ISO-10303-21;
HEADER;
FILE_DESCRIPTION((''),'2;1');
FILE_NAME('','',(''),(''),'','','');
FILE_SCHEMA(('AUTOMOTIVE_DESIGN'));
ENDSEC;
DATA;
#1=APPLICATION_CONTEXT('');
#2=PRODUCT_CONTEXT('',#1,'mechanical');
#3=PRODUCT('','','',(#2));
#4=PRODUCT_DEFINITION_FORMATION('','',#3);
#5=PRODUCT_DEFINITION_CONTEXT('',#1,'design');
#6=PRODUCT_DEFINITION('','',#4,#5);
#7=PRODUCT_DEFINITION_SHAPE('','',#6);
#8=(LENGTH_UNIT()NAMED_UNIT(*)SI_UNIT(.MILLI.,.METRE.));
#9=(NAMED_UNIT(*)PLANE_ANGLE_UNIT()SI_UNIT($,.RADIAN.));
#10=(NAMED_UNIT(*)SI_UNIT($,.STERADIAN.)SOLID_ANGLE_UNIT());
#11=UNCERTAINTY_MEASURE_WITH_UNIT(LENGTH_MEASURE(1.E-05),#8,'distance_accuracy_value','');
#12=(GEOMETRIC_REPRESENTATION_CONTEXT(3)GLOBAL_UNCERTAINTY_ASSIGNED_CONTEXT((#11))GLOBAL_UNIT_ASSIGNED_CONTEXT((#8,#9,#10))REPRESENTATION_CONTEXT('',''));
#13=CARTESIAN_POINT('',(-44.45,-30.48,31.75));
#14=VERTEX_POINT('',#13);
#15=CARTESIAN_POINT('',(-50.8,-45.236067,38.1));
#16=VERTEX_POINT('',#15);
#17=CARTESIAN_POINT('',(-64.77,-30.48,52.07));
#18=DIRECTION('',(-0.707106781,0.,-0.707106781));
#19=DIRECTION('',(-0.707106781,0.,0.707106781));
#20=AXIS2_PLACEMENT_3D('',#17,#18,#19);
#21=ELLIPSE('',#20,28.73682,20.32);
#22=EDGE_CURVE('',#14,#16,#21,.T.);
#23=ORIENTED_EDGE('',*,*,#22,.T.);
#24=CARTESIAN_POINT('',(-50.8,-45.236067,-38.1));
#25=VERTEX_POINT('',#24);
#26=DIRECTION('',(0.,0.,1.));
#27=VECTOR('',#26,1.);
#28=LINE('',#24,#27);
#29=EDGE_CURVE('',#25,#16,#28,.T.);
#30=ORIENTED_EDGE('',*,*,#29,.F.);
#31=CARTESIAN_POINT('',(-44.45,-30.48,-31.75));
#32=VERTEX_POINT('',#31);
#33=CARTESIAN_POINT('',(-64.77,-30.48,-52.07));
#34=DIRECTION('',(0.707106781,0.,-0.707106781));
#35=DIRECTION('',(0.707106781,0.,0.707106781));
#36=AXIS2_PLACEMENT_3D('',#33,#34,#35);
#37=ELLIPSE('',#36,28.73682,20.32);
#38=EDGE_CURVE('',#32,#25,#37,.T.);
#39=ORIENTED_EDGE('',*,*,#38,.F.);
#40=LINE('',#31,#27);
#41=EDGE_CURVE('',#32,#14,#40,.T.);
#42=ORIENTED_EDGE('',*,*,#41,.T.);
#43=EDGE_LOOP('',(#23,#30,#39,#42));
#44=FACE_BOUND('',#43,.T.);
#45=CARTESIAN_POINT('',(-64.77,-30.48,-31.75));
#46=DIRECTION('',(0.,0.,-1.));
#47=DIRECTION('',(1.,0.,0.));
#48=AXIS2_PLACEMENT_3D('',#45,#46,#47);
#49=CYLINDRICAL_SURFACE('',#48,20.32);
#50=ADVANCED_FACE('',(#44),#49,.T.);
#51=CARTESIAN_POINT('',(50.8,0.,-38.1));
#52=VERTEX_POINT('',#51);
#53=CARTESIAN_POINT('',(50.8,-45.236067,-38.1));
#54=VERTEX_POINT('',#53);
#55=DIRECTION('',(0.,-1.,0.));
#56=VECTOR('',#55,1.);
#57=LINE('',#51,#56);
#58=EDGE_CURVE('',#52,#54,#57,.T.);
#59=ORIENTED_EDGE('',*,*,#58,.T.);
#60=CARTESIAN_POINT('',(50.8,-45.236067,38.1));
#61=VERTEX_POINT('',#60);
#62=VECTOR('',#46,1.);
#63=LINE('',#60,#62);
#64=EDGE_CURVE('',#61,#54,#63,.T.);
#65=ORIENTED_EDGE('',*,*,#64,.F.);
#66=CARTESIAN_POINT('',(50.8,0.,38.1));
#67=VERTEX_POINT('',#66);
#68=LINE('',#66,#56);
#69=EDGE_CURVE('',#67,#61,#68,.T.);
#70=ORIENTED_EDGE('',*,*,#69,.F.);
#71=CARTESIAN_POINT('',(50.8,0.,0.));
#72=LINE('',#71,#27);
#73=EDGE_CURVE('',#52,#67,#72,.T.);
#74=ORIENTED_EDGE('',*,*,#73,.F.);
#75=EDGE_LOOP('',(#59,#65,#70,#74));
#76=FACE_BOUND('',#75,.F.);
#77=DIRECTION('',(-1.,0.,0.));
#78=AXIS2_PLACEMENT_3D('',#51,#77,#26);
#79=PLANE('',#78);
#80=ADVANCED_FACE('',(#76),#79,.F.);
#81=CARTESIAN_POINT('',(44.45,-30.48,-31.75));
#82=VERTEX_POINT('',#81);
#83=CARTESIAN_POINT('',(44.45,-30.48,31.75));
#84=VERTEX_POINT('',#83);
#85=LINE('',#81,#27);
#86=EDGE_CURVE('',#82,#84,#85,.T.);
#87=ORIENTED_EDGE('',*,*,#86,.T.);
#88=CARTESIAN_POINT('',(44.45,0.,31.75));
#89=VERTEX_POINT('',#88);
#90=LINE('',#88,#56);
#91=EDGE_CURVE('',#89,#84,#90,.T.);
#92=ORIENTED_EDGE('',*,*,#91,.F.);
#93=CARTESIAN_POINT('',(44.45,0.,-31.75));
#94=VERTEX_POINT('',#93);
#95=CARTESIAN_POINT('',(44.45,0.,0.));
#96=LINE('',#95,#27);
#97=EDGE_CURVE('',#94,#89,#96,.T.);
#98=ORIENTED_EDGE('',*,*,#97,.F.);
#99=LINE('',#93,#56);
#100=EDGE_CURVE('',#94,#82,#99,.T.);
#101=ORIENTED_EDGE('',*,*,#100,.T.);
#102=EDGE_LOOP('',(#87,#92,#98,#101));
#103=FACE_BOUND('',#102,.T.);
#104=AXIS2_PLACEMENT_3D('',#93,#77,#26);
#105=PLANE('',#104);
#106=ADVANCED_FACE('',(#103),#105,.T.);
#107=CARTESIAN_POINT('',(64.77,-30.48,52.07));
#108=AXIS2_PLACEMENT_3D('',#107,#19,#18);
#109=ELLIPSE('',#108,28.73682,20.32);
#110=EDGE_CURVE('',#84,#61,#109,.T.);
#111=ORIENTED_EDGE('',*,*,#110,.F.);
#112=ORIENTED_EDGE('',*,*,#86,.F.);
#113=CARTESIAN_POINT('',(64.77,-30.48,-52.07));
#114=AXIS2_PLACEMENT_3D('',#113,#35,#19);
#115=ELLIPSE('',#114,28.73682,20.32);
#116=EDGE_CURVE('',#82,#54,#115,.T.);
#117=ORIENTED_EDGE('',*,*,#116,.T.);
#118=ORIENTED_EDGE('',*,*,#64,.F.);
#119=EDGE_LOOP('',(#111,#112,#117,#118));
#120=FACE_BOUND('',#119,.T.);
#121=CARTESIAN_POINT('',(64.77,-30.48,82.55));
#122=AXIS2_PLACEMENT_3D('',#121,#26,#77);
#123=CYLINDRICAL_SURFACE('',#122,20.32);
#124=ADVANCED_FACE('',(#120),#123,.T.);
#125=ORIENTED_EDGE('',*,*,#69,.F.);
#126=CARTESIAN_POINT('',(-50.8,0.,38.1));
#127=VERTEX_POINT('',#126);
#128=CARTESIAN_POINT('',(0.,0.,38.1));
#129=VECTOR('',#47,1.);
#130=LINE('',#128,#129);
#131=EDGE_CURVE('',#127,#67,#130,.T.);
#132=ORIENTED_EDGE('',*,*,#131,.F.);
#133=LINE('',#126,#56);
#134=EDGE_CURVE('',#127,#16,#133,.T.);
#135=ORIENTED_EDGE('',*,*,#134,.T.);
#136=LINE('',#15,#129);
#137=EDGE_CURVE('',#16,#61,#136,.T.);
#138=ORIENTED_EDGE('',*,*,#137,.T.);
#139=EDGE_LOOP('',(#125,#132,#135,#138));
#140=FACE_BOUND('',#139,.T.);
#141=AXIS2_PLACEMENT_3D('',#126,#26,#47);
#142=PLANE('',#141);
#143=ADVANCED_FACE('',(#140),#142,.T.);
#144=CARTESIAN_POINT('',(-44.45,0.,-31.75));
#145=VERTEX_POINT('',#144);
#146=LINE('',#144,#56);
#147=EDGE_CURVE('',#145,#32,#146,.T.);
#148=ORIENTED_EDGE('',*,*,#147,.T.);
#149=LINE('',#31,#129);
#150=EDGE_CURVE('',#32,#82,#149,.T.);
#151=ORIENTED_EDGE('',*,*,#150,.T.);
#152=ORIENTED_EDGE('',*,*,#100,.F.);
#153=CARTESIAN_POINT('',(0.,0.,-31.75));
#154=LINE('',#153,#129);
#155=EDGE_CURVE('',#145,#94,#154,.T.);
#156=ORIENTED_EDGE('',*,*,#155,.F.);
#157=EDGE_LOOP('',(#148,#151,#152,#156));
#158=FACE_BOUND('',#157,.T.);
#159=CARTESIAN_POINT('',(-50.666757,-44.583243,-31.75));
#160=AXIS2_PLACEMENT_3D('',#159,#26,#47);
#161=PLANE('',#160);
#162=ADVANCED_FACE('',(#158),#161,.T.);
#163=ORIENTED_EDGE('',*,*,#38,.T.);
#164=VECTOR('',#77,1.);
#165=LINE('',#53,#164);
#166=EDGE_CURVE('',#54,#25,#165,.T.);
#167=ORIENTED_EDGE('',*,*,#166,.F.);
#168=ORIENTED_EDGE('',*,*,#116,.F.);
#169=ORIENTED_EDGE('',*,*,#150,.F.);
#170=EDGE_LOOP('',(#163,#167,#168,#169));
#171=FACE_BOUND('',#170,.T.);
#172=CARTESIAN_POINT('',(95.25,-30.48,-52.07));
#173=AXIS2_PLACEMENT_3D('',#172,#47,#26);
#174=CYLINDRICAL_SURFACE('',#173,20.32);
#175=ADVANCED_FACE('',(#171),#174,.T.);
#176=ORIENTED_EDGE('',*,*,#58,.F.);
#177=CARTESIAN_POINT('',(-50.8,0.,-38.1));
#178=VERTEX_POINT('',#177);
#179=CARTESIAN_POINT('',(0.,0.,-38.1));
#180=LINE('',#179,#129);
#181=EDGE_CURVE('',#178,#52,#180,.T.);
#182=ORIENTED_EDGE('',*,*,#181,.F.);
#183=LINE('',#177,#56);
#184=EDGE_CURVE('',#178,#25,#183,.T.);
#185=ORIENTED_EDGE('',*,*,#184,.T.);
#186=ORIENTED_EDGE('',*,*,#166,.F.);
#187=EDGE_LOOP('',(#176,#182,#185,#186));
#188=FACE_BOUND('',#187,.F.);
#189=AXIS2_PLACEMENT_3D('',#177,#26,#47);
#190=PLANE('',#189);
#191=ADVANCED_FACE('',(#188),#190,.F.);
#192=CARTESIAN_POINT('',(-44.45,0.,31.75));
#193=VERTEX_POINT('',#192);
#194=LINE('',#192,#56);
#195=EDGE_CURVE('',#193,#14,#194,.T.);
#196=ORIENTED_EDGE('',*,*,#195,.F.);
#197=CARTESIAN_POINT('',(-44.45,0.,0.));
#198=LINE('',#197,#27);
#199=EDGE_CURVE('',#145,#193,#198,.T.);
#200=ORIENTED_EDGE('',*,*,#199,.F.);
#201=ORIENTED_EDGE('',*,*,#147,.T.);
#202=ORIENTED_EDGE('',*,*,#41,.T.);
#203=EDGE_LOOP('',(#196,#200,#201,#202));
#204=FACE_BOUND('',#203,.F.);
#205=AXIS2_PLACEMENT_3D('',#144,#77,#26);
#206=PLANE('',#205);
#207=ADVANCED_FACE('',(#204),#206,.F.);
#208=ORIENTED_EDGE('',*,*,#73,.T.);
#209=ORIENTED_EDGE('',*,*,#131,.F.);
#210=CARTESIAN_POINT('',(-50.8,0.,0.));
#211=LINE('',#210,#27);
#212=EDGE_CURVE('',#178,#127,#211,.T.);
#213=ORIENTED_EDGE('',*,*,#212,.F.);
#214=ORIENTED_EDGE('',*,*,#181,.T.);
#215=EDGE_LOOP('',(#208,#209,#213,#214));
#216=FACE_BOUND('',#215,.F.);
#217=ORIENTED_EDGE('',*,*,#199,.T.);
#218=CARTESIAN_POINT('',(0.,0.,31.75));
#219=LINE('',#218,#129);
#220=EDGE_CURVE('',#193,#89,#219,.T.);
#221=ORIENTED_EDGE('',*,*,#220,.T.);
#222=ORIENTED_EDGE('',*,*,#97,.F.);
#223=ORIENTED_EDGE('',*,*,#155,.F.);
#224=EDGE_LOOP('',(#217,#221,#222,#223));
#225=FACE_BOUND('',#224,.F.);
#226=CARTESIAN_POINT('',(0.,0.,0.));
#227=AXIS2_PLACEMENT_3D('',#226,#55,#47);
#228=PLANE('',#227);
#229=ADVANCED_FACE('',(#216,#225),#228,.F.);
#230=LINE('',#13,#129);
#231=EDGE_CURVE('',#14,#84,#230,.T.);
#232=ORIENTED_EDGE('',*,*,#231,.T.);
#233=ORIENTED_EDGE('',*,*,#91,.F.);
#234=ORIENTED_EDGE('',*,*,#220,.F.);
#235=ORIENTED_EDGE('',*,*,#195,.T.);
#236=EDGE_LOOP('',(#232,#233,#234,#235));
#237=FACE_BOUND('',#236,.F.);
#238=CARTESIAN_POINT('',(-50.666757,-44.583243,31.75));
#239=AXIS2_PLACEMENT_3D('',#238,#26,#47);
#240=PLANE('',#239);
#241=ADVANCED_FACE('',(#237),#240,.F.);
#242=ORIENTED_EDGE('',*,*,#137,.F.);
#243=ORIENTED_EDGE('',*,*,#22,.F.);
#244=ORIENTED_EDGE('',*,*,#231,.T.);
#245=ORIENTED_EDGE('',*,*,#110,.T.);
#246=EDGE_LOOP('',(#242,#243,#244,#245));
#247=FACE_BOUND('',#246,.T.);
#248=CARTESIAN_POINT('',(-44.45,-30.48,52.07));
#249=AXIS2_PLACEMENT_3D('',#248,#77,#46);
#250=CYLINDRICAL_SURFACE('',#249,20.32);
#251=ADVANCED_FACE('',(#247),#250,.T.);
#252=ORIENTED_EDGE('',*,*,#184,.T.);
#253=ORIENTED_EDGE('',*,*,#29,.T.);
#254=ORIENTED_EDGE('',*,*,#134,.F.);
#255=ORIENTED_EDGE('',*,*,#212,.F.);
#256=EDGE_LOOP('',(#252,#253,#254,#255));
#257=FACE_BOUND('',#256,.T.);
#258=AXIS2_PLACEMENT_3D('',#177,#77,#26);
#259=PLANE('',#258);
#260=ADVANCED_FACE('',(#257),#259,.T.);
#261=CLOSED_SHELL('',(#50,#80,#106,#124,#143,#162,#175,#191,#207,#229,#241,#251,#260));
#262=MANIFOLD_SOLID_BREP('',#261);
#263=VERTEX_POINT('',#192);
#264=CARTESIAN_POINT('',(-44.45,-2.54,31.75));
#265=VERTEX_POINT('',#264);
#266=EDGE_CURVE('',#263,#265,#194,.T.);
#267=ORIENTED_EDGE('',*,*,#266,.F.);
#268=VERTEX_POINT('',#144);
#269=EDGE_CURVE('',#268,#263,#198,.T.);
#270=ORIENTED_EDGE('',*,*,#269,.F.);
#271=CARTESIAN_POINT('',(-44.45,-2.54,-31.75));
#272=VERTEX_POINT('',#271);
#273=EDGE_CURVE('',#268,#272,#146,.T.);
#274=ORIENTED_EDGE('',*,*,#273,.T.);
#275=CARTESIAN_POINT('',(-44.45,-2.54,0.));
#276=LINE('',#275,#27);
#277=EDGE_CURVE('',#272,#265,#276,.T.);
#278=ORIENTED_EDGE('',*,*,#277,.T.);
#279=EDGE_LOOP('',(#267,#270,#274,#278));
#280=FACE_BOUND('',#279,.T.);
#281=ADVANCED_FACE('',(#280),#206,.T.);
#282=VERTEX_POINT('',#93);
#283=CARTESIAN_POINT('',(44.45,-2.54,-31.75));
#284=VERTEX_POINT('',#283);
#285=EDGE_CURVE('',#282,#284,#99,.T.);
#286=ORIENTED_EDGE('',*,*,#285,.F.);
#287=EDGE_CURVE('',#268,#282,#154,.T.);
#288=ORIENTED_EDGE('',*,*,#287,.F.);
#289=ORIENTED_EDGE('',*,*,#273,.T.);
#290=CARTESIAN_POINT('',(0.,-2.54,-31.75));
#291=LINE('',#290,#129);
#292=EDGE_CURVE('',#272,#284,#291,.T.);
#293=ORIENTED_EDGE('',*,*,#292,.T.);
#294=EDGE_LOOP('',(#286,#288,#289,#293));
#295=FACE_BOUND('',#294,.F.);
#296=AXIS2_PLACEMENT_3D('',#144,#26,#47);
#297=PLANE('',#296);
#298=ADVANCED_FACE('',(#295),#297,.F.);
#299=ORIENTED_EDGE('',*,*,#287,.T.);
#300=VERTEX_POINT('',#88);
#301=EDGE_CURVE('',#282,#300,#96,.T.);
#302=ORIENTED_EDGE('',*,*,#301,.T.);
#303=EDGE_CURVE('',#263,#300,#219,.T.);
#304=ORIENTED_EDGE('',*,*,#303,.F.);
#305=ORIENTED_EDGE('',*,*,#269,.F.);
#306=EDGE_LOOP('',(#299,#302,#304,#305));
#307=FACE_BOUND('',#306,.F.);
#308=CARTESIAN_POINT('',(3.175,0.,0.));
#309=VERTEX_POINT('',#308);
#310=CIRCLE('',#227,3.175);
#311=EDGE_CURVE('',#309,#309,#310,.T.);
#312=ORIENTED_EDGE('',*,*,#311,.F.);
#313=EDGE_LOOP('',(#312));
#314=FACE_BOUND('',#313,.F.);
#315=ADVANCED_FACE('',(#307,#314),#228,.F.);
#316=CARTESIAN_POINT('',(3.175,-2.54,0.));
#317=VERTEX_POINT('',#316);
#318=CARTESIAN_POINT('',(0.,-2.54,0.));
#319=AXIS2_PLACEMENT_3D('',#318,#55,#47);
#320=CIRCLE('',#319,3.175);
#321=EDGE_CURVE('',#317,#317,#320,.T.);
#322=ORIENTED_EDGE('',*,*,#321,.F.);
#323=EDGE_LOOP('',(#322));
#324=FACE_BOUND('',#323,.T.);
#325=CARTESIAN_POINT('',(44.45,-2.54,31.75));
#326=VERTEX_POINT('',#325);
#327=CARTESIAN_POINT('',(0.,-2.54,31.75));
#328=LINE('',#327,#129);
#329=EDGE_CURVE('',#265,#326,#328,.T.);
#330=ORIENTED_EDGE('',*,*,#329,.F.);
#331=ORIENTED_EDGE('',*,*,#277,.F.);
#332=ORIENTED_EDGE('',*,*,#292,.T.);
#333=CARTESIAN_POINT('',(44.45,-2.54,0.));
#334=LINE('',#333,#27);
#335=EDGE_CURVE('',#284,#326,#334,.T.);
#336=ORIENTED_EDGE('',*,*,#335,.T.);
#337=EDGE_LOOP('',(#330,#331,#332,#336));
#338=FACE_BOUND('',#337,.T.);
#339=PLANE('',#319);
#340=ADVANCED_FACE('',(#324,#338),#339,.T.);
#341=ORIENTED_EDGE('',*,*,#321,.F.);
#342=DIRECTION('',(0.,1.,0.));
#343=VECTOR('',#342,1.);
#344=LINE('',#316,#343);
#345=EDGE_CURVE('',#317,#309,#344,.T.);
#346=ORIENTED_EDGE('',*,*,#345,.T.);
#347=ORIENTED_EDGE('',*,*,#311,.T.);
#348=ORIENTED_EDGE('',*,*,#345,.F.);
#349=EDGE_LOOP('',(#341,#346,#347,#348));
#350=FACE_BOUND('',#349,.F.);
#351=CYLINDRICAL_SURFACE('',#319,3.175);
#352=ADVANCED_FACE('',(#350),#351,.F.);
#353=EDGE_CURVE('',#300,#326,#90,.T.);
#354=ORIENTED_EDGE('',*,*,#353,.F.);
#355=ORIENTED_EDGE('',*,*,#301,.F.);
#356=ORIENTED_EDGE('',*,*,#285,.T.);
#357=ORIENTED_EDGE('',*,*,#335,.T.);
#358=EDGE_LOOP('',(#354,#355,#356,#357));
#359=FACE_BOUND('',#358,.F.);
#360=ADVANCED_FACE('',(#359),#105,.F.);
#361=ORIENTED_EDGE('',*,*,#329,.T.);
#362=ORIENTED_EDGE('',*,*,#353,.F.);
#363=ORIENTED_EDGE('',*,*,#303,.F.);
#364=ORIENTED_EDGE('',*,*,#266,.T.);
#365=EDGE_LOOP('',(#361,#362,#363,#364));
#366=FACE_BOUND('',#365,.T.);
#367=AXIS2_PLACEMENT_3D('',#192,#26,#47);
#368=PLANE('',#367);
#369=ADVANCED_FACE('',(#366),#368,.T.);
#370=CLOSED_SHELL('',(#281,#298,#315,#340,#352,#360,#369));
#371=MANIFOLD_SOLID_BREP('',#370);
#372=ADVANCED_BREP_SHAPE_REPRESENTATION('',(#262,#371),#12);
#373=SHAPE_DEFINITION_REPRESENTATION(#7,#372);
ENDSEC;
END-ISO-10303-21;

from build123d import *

# Parameters (mm, degrees)
F0_W         = 101.6
F0_H         = 76.2
F0_W_2       = 88.9
F0_H_2       = 63.5
F1_DEPTH     = 50.8
F2_DEPTH     = 2.54
F3_T1_DEPTH  = 63.5
F3_T3_DEPTH  = 88.9
F3_T9_DEPTH  = 139.7
F3_T15_DEPTH = 114.3
F3_T24_DEPTH = 139.7
F3_T30_DEPTH = 114.3
F3_T39_DEPTH = 139.7
F3_T45_DEPTH = 114.3
F3_T54_DEPTH = 114.3
F3_T60_DEPTH = 139.7
F4_R         = 3.175
F5_DEPTH     = 2.541


# Not quite as in the source:
# - a fillet or chamfer that OpenCascade refuses, or shapes differently, is made with other operations: its cross-section is extruded or revolved along the edge and cut away or added


with BuildPart() as f1:
    # F0 (on Front) → F1 (new body)
    with BuildSketch(Plane.XZ):
        Rectangle(F0_W, F0_H)
        Rectangle(F0_W_2, F0_H_2, mode=Mode.SUBTRACT)
    extrude(amount=F1_DEPTH)

    # F3: fillet of radius 20.32 on 4 edges, made by hand

    # F3_s2 → F3_t1 (cut)
    with BuildSketch(Plane.XY.offset(-31.75)):
        with BuildLine():
            ThreePointArc((-44.45, -30.48), (-50.4015902063, -44.8484097937), (-64.77, -50.8))
            Line((-64.77, -50.8), (-44.45, -50.8))
            Line((-44.45, -50.8), (-44.45, -30.48))
        make_face()
        with BuildLine():
            ThreePointArc((44.45, -30.48), (50.4015902063, -44.8484097937), (64.77, -50.8))
            Line((64.77, -50.8), (44.45, -50.8))
            Line((44.45, -50.8), (44.45, -30.48))
        make_face()
    extrude(amount=F3_T1_DEPTH, mode=Mode.SUBTRACT)

    # F3_s4 → F3_t3 (cut)
    with BuildSketch(Plane.YZ.offset(-44.45)):
        with BuildLine():
            ThreePointArc((-30.48, 31.75), (-44.8484097937, 37.7015902063), (-50.8, 52.07))
            Line((-50.8, 52.07), (-50.8, 31.75))
            Line((-50.8, 31.75), (-30.48, 31.75))
        make_face()
        with BuildLine():
            ThreePointArc((-30.48, -31.75), (-44.8484097937, -37.7015902063), (-50.8, -52.07))
            Line((-50.8, -52.07), (-50.8, -31.75))
            Line((-50.8, -31.75), (-30.48, -31.75))
        make_face()
    extrude(amount=F3_T3_DEPTH, mode=Mode.SUBTRACT)


with BuildPart() as f2:
    # F0 (on Front) → F2 (new body)
    with BuildSketch(Plane.XZ):
        Rectangle(F0_W_2, F0_H_2)
    extrude(amount=F2_DEPTH)

    # F4 (on face) → F5 (cut, through all)
    with BuildSketch(Plane.XZ.offset(2.54)):
        Circle(F4_R)
    extrude(amount=-F5_DEPTH, mode=Mode.SUBTRACT)


with BuildPart() as f3_tool7:
    # F3_s8 → F3_t9 (new body)
    with BuildSketch(Plane.YZ.offset(44.45)):
        with BuildLine():
            ThreePointArc((-30.48, -31.75), (-44.8484097937, -37.7015902063), (-50.8, -52.07))
            Line((-50.8, -52.07), (-50.8, -31.75))
            Line((-50.8, -31.75), (-30.48, -31.75))
        make_face()
    extrude(amount=-F3_T9_DEPTH)

    split(bisect_by=Plane.YZ.offset(-50.8), keep=Keep.TOP)

    split(bisect_by=Plane.XY.offset(-38.1), keep=Keep.TOP)

    split(bisect_by=Plane.YZ.offset(-44.45), keep=Keep.BOTTOM)


with BuildPart() as f3_tool13:
    # F3_s14 → F3_t15 (new body)
    with BuildSketch(Plane.XY.offset(-82.55)):
        with BuildLine():
            ThreePointArc((-44.45, -30.48), (-50.4015902063, -44.8484097937), (-64.77, -50.8))
            Line((-64.77, -50.8), (-44.45, -50.8))
            Line((-44.45, -50.8), (-44.45, -30.48))
        make_face()
    extrude(amount=F3_T15_DEPTH)

    split(bisect_by=Plane.YZ.offset(-50.8), keep=Keep.TOP)

    split(bisect_by=Plane.XY.offset(-38.1), keep=Keep.TOP)

    split(bisect_by=Plane.XY.offset(-31.75), keep=Keep.BOTTOM)


with BuildPart() as f3_tool7_1:
    add(f3_tool7.part)

    # F3_t19: intersect F3_tool13
    add(f3_tool13.part, mode=Mode.INTERSECT)


with BuildPart() as f1_1:
    add(f1.part)

    # F3_t5: cut F3_tool7
    add(f3_tool7_1.part, mode=Mode.SUBTRACT)


with BuildPart() as f3_tool22:
    # F3_s23 → F3_t24 (new body)
    with BuildSketch(Plane.YZ.offset(-95.25)):
        with BuildLine():
            ThreePointArc((-30.48, 31.75), (-44.8484097937, 37.7015902063), (-50.8, 52.07))
            Line((-50.8, 52.07), (-50.8, 31.75))
            Line((-50.8, 31.75), (-30.48, 31.75))
        make_face()
    extrude(amount=F3_T24_DEPTH)

    split(bisect_by=Plane.XY.offset(38.1), keep=Keep.BOTTOM)

    split(bisect_by=Plane.YZ.offset(-50.8), keep=Keep.TOP)

    split(bisect_by=Plane.YZ.offset(-44.45), keep=Keep.BOTTOM)


with BuildPart() as f3_tool28:
    # F3_s29 → F3_t30 (new body)
    with BuildSketch(Plane.XY.offset(-31.75)):
        with BuildLine():
            ThreePointArc((-44.45, -30.48), (-50.4015902063, -44.8484097937), (-64.77, -50.8))
            Line((-64.77, -50.8), (-44.45, -50.8))
            Line((-44.45, -50.8), (-44.45, -30.48))
        make_face()
    extrude(amount=F3_T30_DEPTH)

    split(bisect_by=Plane.XY.offset(38.1), keep=Keep.BOTTOM)

    split(bisect_by=Plane.YZ.offset(-50.8), keep=Keep.TOP)

    split(bisect_by=Plane.XY.offset(31.75), keep=Keep.TOP)


with BuildPart() as f3_tool22_1:
    add(f3_tool22.part)

    # F3_t34: intersect F3_tool28
    add(f3_tool28.part, mode=Mode.INTERSECT)


with BuildPart() as f1_2:
    add(f1_1.part)

    # F3_t20: cut F3_tool22
    add(f3_tool22_1.part, mode=Mode.SUBTRACT)


with BuildPart() as f3_tool37:
    # F3_s38 → F3_t39 (new body)
    with BuildSketch(Plane.YZ.offset(-44.45)):
        with BuildLine():
            ThreePointArc((-30.48, 31.75), (-44.8484097937, 37.7015902063), (-50.8, 52.07))
            Line((-50.8, 52.07), (-50.8, 31.75))
            Line((-50.8, 31.75), (-30.48, 31.75))
        make_face()
    extrude(amount=F3_T39_DEPTH)

    split(bisect_by=Plane.YZ.offset(50.8), keep=Keep.BOTTOM)

    split(bisect_by=Plane.XY.offset(38.1), keep=Keep.BOTTOM)

    split(bisect_by=Plane.YZ.offset(44.45), keep=Keep.TOP)


with BuildPart() as f3_tool43:
    # F3_s44 → F3_t45 (new body)
    with BuildSketch(Plane.XY.offset(82.55)):
        with BuildLine():
            ThreePointArc((44.45, -30.48), (50.4015902063, -44.8484097937), (64.77, -50.8))
            Line((64.77, -50.8), (44.45, -50.8))
            Line((44.45, -50.8), (44.45, -30.48))
        make_face()
    extrude(amount=-F3_T45_DEPTH)

    split(bisect_by=Plane.YZ.offset(50.8), keep=Keep.BOTTOM)

    split(bisect_by=Plane.XY.offset(38.1), keep=Keep.BOTTOM)

    split(bisect_by=Plane.XY.offset(31.75), keep=Keep.TOP)


with BuildPart() as f3_tool37_1:
    add(f3_tool37.part)

    # F3_t49: intersect F3_tool43
    add(f3_tool43.part, mode=Mode.INTERSECT)


with BuildPart() as f1_3:
    add(f1_2.part)

    # F3_t35: cut F3_tool37
    add(f3_tool37_1.part, mode=Mode.SUBTRACT)


with BuildPart() as f3_tool52:
    # F3_s53 → F3_t54 (new body)
    with BuildSketch(Plane.XY.offset(31.75)):
        with BuildLine():
            ThreePointArc((44.45, -30.48), (50.4015902063, -44.8484097937), (64.77, -50.8))
            Line((64.77, -50.8), (44.45, -50.8))
            Line((44.45, -50.8), (44.45, -30.48))
        make_face()
    extrude(amount=-F3_T54_DEPTH)

    split(bisect_by=Plane.YZ.offset(50.8), keep=Keep.BOTTOM)

    split(bisect_by=Plane.XY.offset(-38.1), keep=Keep.TOP)

    split(bisect_by=Plane.XY.offset(-31.75), keep=Keep.BOTTOM)


with BuildPart() as f3_tool58:
    # F3_s59 → F3_t60 (new body)
    with BuildSketch(Plane.YZ.offset(95.25)):
        with BuildLine():
            ThreePointArc((-30.48, -31.75), (-44.8484097937, -37.7015902063), (-50.8, -52.07))
            Line((-50.8, -52.07), (-50.8, -31.75))
            Line((-50.8, -31.75), (-30.48, -31.75))
        make_face()
    extrude(amount=-F3_T60_DEPTH)

    split(bisect_by=Plane.YZ.offset(50.8), keep=Keep.BOTTOM)

    split(bisect_by=Plane.XY.offset(-38.1), keep=Keep.TOP)

    split(bisect_by=Plane.YZ.offset(44.45), keep=Keep.TOP)


with BuildPart() as f3_tool52_1:
    add(f3_tool52.part)

    # F3_t64: intersect F3_tool58
    add(f3_tool58.part, mode=Mode.INTERSECT)


with BuildPart() as f1_4:
    add(f1_3.part)

    # F3_t50: cut F3_tool52
    add(f3_tool52_1.part, mode=Mode.SUBTRACT)


solid = Compound([f2.part, f1_4.part])
